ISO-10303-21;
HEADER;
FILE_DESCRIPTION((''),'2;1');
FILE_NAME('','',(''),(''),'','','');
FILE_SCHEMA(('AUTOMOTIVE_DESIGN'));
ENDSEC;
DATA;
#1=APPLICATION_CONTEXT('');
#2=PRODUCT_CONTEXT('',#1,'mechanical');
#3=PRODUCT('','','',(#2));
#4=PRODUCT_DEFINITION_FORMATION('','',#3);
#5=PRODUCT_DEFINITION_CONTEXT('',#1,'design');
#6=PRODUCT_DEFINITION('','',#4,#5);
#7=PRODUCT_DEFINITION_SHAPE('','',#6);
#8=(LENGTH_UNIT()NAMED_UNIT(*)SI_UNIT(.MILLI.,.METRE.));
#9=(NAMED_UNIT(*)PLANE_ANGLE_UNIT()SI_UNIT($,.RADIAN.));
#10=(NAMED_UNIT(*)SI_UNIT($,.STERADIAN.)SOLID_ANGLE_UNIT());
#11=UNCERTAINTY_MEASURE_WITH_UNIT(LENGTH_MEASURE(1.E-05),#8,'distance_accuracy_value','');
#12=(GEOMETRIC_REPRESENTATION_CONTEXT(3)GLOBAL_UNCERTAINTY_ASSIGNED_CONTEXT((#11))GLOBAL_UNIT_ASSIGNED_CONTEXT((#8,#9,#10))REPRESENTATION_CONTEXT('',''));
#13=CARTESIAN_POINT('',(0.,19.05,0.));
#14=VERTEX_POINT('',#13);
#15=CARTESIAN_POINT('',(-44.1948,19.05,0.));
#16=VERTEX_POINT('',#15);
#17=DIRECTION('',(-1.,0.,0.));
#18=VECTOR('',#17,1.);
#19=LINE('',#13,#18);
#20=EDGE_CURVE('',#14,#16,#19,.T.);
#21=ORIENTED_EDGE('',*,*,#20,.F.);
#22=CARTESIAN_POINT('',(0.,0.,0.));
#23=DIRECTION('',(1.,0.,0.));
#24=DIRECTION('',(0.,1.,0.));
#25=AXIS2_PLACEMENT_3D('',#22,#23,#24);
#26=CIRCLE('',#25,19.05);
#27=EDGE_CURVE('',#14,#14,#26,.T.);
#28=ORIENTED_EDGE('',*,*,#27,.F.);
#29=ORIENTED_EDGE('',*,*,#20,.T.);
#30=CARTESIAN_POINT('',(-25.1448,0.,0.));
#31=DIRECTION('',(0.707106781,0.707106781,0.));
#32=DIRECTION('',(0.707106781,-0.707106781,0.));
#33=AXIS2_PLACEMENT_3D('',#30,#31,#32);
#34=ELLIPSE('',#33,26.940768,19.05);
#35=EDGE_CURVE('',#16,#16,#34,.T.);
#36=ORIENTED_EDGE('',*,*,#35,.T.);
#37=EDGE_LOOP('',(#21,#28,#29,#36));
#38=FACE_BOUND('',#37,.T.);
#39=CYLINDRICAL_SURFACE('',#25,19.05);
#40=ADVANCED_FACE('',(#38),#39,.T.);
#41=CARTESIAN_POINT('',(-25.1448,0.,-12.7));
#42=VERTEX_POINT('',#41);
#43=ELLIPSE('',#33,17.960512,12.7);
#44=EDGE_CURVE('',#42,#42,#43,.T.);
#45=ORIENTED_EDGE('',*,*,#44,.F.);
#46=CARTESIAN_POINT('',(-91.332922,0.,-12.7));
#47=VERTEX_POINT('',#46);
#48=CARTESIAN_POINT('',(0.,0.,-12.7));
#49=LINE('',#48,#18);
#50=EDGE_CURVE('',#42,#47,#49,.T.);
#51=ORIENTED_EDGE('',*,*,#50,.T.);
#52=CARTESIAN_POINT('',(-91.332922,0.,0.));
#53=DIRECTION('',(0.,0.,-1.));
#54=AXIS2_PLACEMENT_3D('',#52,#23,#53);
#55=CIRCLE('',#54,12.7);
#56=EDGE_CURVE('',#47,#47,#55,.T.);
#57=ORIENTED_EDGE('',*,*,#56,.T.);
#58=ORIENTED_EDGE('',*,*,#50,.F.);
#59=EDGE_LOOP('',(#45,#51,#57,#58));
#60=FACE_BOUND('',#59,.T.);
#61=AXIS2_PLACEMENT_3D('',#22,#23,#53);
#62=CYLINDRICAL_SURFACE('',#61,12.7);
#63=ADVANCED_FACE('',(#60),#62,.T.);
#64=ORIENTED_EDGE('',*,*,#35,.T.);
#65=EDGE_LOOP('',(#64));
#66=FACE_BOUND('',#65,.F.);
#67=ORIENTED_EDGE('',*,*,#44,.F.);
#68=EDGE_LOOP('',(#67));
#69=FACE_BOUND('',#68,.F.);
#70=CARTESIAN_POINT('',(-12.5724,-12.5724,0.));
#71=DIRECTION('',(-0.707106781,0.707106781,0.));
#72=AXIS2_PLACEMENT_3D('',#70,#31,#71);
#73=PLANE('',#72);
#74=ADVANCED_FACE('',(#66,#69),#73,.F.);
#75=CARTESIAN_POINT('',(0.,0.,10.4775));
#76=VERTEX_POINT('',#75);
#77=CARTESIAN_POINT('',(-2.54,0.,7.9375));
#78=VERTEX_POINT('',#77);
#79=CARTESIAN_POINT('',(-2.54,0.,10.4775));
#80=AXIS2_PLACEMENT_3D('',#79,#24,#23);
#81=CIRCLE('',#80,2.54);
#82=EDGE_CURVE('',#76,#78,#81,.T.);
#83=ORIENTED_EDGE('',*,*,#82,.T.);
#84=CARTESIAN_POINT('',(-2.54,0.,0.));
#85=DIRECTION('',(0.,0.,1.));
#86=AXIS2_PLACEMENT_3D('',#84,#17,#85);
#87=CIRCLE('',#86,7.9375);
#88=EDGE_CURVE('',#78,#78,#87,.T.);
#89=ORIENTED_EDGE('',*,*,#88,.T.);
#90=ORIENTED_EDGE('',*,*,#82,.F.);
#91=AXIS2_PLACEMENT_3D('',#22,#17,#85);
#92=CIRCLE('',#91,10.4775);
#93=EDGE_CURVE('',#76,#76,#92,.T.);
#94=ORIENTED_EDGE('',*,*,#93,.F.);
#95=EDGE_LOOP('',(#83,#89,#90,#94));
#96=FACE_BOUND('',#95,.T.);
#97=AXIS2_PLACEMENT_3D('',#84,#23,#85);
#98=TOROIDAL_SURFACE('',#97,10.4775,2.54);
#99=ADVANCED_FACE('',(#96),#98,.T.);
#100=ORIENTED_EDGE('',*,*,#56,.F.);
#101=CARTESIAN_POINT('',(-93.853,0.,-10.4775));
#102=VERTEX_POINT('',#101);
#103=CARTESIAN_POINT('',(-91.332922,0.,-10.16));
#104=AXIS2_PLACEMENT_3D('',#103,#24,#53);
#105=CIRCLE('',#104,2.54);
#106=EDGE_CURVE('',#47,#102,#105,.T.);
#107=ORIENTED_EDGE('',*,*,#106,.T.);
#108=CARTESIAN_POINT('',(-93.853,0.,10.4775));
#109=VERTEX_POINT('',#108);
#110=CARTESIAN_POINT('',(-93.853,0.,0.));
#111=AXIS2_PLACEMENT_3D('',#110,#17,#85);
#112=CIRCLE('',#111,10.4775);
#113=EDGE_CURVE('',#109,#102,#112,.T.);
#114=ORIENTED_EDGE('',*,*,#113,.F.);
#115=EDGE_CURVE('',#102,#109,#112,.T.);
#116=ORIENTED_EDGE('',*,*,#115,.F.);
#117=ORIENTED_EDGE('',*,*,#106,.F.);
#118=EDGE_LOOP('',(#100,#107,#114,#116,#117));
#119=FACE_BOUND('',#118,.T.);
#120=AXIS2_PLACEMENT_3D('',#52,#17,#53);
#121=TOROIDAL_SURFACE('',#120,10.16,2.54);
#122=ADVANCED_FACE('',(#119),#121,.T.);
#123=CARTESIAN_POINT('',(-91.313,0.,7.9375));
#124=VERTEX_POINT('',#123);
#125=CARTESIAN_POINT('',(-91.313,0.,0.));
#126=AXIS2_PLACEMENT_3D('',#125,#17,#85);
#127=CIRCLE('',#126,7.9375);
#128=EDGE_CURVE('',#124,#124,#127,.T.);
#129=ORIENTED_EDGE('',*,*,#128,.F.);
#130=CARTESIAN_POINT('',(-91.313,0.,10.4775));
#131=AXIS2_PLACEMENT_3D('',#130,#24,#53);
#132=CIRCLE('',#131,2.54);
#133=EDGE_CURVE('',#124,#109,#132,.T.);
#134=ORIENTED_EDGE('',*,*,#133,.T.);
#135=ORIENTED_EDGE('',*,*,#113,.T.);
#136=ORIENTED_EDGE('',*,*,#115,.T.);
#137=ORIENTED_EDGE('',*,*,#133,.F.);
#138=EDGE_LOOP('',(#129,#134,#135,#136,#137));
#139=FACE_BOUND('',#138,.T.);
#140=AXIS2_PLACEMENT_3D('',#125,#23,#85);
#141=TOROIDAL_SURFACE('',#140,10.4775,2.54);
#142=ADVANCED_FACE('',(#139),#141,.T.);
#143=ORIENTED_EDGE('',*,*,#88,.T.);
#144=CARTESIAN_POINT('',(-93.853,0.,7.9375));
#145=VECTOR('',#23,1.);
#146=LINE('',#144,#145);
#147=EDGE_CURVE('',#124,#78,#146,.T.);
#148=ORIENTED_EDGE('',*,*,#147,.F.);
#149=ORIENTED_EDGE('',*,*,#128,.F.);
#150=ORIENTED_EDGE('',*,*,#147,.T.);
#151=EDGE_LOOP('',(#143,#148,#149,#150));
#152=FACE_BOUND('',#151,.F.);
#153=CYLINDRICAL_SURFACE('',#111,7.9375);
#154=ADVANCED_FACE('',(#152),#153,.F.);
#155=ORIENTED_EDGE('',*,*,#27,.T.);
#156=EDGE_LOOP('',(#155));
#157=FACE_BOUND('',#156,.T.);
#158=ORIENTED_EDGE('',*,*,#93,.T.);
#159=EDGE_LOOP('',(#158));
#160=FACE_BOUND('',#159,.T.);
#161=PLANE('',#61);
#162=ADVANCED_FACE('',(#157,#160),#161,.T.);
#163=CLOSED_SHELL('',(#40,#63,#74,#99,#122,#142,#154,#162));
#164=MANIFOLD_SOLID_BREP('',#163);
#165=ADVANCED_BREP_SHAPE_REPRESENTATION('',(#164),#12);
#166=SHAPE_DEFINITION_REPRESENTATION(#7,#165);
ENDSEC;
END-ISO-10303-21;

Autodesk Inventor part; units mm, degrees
ref_plane "XZ Plane" through (0, 0, 0) normal (0, 1, 0) x (-1, 0, 0)
ref_plane "XY Plane" through (0, 0, 0) normal (0, 0, 1) x (1, 0, 0)
ref_plane "Work Plane1" through (0, 0, 0) normal (0.7071068, 0.7071068, 0) x (0, 0, 1)
sketch "Sketch1" plane through (0, 0, 0) normal (1, 0, 0) x (0, 1, 0)
  circle A0 centre (0, 0) radius 19.05
  dimension "outerDiameter" = 38.1
ref_plane "Work Plane2" through (-12.5724, -12.5724, 0) normal (0.7071068, 0.7071068, 0) x (0, 0, 1)
extrude "Extrusion2" add sketch "Sketch1" against normal up to surface surface through (-12.5724, -12.5724, 0) normal (0.7071068, 0.7071068, 0)
sketch "Sketch3" plane through (0, 0, 0) normal (1, 0, 0) x (0, 0, -1)
  circle A0 centre (0, 0) radius 12.7
  dimension "thruHoleDiameter" = 25.4
extrude "Extrusion4" add sketch "Sketch3" against normal blind 93.853
sketch "Sketch4" plane through (-93.853, 0, 0) normal (-1, 0, 0) x (0, 0, 1)
  circle A0 centre (0, 0) radius 7.9375
  dimension "holeForString" = 15.875
extrude "Extrusion5" cut sketch "Sketch4" against normal through all
fillet "Fillet1" radius 2.54 3 edges at (0, 0, -7.9375) (-93.853, 0, -7.9375) (-93.853, 0, 12.7)
properties part number "ElectricFenceWasher"
